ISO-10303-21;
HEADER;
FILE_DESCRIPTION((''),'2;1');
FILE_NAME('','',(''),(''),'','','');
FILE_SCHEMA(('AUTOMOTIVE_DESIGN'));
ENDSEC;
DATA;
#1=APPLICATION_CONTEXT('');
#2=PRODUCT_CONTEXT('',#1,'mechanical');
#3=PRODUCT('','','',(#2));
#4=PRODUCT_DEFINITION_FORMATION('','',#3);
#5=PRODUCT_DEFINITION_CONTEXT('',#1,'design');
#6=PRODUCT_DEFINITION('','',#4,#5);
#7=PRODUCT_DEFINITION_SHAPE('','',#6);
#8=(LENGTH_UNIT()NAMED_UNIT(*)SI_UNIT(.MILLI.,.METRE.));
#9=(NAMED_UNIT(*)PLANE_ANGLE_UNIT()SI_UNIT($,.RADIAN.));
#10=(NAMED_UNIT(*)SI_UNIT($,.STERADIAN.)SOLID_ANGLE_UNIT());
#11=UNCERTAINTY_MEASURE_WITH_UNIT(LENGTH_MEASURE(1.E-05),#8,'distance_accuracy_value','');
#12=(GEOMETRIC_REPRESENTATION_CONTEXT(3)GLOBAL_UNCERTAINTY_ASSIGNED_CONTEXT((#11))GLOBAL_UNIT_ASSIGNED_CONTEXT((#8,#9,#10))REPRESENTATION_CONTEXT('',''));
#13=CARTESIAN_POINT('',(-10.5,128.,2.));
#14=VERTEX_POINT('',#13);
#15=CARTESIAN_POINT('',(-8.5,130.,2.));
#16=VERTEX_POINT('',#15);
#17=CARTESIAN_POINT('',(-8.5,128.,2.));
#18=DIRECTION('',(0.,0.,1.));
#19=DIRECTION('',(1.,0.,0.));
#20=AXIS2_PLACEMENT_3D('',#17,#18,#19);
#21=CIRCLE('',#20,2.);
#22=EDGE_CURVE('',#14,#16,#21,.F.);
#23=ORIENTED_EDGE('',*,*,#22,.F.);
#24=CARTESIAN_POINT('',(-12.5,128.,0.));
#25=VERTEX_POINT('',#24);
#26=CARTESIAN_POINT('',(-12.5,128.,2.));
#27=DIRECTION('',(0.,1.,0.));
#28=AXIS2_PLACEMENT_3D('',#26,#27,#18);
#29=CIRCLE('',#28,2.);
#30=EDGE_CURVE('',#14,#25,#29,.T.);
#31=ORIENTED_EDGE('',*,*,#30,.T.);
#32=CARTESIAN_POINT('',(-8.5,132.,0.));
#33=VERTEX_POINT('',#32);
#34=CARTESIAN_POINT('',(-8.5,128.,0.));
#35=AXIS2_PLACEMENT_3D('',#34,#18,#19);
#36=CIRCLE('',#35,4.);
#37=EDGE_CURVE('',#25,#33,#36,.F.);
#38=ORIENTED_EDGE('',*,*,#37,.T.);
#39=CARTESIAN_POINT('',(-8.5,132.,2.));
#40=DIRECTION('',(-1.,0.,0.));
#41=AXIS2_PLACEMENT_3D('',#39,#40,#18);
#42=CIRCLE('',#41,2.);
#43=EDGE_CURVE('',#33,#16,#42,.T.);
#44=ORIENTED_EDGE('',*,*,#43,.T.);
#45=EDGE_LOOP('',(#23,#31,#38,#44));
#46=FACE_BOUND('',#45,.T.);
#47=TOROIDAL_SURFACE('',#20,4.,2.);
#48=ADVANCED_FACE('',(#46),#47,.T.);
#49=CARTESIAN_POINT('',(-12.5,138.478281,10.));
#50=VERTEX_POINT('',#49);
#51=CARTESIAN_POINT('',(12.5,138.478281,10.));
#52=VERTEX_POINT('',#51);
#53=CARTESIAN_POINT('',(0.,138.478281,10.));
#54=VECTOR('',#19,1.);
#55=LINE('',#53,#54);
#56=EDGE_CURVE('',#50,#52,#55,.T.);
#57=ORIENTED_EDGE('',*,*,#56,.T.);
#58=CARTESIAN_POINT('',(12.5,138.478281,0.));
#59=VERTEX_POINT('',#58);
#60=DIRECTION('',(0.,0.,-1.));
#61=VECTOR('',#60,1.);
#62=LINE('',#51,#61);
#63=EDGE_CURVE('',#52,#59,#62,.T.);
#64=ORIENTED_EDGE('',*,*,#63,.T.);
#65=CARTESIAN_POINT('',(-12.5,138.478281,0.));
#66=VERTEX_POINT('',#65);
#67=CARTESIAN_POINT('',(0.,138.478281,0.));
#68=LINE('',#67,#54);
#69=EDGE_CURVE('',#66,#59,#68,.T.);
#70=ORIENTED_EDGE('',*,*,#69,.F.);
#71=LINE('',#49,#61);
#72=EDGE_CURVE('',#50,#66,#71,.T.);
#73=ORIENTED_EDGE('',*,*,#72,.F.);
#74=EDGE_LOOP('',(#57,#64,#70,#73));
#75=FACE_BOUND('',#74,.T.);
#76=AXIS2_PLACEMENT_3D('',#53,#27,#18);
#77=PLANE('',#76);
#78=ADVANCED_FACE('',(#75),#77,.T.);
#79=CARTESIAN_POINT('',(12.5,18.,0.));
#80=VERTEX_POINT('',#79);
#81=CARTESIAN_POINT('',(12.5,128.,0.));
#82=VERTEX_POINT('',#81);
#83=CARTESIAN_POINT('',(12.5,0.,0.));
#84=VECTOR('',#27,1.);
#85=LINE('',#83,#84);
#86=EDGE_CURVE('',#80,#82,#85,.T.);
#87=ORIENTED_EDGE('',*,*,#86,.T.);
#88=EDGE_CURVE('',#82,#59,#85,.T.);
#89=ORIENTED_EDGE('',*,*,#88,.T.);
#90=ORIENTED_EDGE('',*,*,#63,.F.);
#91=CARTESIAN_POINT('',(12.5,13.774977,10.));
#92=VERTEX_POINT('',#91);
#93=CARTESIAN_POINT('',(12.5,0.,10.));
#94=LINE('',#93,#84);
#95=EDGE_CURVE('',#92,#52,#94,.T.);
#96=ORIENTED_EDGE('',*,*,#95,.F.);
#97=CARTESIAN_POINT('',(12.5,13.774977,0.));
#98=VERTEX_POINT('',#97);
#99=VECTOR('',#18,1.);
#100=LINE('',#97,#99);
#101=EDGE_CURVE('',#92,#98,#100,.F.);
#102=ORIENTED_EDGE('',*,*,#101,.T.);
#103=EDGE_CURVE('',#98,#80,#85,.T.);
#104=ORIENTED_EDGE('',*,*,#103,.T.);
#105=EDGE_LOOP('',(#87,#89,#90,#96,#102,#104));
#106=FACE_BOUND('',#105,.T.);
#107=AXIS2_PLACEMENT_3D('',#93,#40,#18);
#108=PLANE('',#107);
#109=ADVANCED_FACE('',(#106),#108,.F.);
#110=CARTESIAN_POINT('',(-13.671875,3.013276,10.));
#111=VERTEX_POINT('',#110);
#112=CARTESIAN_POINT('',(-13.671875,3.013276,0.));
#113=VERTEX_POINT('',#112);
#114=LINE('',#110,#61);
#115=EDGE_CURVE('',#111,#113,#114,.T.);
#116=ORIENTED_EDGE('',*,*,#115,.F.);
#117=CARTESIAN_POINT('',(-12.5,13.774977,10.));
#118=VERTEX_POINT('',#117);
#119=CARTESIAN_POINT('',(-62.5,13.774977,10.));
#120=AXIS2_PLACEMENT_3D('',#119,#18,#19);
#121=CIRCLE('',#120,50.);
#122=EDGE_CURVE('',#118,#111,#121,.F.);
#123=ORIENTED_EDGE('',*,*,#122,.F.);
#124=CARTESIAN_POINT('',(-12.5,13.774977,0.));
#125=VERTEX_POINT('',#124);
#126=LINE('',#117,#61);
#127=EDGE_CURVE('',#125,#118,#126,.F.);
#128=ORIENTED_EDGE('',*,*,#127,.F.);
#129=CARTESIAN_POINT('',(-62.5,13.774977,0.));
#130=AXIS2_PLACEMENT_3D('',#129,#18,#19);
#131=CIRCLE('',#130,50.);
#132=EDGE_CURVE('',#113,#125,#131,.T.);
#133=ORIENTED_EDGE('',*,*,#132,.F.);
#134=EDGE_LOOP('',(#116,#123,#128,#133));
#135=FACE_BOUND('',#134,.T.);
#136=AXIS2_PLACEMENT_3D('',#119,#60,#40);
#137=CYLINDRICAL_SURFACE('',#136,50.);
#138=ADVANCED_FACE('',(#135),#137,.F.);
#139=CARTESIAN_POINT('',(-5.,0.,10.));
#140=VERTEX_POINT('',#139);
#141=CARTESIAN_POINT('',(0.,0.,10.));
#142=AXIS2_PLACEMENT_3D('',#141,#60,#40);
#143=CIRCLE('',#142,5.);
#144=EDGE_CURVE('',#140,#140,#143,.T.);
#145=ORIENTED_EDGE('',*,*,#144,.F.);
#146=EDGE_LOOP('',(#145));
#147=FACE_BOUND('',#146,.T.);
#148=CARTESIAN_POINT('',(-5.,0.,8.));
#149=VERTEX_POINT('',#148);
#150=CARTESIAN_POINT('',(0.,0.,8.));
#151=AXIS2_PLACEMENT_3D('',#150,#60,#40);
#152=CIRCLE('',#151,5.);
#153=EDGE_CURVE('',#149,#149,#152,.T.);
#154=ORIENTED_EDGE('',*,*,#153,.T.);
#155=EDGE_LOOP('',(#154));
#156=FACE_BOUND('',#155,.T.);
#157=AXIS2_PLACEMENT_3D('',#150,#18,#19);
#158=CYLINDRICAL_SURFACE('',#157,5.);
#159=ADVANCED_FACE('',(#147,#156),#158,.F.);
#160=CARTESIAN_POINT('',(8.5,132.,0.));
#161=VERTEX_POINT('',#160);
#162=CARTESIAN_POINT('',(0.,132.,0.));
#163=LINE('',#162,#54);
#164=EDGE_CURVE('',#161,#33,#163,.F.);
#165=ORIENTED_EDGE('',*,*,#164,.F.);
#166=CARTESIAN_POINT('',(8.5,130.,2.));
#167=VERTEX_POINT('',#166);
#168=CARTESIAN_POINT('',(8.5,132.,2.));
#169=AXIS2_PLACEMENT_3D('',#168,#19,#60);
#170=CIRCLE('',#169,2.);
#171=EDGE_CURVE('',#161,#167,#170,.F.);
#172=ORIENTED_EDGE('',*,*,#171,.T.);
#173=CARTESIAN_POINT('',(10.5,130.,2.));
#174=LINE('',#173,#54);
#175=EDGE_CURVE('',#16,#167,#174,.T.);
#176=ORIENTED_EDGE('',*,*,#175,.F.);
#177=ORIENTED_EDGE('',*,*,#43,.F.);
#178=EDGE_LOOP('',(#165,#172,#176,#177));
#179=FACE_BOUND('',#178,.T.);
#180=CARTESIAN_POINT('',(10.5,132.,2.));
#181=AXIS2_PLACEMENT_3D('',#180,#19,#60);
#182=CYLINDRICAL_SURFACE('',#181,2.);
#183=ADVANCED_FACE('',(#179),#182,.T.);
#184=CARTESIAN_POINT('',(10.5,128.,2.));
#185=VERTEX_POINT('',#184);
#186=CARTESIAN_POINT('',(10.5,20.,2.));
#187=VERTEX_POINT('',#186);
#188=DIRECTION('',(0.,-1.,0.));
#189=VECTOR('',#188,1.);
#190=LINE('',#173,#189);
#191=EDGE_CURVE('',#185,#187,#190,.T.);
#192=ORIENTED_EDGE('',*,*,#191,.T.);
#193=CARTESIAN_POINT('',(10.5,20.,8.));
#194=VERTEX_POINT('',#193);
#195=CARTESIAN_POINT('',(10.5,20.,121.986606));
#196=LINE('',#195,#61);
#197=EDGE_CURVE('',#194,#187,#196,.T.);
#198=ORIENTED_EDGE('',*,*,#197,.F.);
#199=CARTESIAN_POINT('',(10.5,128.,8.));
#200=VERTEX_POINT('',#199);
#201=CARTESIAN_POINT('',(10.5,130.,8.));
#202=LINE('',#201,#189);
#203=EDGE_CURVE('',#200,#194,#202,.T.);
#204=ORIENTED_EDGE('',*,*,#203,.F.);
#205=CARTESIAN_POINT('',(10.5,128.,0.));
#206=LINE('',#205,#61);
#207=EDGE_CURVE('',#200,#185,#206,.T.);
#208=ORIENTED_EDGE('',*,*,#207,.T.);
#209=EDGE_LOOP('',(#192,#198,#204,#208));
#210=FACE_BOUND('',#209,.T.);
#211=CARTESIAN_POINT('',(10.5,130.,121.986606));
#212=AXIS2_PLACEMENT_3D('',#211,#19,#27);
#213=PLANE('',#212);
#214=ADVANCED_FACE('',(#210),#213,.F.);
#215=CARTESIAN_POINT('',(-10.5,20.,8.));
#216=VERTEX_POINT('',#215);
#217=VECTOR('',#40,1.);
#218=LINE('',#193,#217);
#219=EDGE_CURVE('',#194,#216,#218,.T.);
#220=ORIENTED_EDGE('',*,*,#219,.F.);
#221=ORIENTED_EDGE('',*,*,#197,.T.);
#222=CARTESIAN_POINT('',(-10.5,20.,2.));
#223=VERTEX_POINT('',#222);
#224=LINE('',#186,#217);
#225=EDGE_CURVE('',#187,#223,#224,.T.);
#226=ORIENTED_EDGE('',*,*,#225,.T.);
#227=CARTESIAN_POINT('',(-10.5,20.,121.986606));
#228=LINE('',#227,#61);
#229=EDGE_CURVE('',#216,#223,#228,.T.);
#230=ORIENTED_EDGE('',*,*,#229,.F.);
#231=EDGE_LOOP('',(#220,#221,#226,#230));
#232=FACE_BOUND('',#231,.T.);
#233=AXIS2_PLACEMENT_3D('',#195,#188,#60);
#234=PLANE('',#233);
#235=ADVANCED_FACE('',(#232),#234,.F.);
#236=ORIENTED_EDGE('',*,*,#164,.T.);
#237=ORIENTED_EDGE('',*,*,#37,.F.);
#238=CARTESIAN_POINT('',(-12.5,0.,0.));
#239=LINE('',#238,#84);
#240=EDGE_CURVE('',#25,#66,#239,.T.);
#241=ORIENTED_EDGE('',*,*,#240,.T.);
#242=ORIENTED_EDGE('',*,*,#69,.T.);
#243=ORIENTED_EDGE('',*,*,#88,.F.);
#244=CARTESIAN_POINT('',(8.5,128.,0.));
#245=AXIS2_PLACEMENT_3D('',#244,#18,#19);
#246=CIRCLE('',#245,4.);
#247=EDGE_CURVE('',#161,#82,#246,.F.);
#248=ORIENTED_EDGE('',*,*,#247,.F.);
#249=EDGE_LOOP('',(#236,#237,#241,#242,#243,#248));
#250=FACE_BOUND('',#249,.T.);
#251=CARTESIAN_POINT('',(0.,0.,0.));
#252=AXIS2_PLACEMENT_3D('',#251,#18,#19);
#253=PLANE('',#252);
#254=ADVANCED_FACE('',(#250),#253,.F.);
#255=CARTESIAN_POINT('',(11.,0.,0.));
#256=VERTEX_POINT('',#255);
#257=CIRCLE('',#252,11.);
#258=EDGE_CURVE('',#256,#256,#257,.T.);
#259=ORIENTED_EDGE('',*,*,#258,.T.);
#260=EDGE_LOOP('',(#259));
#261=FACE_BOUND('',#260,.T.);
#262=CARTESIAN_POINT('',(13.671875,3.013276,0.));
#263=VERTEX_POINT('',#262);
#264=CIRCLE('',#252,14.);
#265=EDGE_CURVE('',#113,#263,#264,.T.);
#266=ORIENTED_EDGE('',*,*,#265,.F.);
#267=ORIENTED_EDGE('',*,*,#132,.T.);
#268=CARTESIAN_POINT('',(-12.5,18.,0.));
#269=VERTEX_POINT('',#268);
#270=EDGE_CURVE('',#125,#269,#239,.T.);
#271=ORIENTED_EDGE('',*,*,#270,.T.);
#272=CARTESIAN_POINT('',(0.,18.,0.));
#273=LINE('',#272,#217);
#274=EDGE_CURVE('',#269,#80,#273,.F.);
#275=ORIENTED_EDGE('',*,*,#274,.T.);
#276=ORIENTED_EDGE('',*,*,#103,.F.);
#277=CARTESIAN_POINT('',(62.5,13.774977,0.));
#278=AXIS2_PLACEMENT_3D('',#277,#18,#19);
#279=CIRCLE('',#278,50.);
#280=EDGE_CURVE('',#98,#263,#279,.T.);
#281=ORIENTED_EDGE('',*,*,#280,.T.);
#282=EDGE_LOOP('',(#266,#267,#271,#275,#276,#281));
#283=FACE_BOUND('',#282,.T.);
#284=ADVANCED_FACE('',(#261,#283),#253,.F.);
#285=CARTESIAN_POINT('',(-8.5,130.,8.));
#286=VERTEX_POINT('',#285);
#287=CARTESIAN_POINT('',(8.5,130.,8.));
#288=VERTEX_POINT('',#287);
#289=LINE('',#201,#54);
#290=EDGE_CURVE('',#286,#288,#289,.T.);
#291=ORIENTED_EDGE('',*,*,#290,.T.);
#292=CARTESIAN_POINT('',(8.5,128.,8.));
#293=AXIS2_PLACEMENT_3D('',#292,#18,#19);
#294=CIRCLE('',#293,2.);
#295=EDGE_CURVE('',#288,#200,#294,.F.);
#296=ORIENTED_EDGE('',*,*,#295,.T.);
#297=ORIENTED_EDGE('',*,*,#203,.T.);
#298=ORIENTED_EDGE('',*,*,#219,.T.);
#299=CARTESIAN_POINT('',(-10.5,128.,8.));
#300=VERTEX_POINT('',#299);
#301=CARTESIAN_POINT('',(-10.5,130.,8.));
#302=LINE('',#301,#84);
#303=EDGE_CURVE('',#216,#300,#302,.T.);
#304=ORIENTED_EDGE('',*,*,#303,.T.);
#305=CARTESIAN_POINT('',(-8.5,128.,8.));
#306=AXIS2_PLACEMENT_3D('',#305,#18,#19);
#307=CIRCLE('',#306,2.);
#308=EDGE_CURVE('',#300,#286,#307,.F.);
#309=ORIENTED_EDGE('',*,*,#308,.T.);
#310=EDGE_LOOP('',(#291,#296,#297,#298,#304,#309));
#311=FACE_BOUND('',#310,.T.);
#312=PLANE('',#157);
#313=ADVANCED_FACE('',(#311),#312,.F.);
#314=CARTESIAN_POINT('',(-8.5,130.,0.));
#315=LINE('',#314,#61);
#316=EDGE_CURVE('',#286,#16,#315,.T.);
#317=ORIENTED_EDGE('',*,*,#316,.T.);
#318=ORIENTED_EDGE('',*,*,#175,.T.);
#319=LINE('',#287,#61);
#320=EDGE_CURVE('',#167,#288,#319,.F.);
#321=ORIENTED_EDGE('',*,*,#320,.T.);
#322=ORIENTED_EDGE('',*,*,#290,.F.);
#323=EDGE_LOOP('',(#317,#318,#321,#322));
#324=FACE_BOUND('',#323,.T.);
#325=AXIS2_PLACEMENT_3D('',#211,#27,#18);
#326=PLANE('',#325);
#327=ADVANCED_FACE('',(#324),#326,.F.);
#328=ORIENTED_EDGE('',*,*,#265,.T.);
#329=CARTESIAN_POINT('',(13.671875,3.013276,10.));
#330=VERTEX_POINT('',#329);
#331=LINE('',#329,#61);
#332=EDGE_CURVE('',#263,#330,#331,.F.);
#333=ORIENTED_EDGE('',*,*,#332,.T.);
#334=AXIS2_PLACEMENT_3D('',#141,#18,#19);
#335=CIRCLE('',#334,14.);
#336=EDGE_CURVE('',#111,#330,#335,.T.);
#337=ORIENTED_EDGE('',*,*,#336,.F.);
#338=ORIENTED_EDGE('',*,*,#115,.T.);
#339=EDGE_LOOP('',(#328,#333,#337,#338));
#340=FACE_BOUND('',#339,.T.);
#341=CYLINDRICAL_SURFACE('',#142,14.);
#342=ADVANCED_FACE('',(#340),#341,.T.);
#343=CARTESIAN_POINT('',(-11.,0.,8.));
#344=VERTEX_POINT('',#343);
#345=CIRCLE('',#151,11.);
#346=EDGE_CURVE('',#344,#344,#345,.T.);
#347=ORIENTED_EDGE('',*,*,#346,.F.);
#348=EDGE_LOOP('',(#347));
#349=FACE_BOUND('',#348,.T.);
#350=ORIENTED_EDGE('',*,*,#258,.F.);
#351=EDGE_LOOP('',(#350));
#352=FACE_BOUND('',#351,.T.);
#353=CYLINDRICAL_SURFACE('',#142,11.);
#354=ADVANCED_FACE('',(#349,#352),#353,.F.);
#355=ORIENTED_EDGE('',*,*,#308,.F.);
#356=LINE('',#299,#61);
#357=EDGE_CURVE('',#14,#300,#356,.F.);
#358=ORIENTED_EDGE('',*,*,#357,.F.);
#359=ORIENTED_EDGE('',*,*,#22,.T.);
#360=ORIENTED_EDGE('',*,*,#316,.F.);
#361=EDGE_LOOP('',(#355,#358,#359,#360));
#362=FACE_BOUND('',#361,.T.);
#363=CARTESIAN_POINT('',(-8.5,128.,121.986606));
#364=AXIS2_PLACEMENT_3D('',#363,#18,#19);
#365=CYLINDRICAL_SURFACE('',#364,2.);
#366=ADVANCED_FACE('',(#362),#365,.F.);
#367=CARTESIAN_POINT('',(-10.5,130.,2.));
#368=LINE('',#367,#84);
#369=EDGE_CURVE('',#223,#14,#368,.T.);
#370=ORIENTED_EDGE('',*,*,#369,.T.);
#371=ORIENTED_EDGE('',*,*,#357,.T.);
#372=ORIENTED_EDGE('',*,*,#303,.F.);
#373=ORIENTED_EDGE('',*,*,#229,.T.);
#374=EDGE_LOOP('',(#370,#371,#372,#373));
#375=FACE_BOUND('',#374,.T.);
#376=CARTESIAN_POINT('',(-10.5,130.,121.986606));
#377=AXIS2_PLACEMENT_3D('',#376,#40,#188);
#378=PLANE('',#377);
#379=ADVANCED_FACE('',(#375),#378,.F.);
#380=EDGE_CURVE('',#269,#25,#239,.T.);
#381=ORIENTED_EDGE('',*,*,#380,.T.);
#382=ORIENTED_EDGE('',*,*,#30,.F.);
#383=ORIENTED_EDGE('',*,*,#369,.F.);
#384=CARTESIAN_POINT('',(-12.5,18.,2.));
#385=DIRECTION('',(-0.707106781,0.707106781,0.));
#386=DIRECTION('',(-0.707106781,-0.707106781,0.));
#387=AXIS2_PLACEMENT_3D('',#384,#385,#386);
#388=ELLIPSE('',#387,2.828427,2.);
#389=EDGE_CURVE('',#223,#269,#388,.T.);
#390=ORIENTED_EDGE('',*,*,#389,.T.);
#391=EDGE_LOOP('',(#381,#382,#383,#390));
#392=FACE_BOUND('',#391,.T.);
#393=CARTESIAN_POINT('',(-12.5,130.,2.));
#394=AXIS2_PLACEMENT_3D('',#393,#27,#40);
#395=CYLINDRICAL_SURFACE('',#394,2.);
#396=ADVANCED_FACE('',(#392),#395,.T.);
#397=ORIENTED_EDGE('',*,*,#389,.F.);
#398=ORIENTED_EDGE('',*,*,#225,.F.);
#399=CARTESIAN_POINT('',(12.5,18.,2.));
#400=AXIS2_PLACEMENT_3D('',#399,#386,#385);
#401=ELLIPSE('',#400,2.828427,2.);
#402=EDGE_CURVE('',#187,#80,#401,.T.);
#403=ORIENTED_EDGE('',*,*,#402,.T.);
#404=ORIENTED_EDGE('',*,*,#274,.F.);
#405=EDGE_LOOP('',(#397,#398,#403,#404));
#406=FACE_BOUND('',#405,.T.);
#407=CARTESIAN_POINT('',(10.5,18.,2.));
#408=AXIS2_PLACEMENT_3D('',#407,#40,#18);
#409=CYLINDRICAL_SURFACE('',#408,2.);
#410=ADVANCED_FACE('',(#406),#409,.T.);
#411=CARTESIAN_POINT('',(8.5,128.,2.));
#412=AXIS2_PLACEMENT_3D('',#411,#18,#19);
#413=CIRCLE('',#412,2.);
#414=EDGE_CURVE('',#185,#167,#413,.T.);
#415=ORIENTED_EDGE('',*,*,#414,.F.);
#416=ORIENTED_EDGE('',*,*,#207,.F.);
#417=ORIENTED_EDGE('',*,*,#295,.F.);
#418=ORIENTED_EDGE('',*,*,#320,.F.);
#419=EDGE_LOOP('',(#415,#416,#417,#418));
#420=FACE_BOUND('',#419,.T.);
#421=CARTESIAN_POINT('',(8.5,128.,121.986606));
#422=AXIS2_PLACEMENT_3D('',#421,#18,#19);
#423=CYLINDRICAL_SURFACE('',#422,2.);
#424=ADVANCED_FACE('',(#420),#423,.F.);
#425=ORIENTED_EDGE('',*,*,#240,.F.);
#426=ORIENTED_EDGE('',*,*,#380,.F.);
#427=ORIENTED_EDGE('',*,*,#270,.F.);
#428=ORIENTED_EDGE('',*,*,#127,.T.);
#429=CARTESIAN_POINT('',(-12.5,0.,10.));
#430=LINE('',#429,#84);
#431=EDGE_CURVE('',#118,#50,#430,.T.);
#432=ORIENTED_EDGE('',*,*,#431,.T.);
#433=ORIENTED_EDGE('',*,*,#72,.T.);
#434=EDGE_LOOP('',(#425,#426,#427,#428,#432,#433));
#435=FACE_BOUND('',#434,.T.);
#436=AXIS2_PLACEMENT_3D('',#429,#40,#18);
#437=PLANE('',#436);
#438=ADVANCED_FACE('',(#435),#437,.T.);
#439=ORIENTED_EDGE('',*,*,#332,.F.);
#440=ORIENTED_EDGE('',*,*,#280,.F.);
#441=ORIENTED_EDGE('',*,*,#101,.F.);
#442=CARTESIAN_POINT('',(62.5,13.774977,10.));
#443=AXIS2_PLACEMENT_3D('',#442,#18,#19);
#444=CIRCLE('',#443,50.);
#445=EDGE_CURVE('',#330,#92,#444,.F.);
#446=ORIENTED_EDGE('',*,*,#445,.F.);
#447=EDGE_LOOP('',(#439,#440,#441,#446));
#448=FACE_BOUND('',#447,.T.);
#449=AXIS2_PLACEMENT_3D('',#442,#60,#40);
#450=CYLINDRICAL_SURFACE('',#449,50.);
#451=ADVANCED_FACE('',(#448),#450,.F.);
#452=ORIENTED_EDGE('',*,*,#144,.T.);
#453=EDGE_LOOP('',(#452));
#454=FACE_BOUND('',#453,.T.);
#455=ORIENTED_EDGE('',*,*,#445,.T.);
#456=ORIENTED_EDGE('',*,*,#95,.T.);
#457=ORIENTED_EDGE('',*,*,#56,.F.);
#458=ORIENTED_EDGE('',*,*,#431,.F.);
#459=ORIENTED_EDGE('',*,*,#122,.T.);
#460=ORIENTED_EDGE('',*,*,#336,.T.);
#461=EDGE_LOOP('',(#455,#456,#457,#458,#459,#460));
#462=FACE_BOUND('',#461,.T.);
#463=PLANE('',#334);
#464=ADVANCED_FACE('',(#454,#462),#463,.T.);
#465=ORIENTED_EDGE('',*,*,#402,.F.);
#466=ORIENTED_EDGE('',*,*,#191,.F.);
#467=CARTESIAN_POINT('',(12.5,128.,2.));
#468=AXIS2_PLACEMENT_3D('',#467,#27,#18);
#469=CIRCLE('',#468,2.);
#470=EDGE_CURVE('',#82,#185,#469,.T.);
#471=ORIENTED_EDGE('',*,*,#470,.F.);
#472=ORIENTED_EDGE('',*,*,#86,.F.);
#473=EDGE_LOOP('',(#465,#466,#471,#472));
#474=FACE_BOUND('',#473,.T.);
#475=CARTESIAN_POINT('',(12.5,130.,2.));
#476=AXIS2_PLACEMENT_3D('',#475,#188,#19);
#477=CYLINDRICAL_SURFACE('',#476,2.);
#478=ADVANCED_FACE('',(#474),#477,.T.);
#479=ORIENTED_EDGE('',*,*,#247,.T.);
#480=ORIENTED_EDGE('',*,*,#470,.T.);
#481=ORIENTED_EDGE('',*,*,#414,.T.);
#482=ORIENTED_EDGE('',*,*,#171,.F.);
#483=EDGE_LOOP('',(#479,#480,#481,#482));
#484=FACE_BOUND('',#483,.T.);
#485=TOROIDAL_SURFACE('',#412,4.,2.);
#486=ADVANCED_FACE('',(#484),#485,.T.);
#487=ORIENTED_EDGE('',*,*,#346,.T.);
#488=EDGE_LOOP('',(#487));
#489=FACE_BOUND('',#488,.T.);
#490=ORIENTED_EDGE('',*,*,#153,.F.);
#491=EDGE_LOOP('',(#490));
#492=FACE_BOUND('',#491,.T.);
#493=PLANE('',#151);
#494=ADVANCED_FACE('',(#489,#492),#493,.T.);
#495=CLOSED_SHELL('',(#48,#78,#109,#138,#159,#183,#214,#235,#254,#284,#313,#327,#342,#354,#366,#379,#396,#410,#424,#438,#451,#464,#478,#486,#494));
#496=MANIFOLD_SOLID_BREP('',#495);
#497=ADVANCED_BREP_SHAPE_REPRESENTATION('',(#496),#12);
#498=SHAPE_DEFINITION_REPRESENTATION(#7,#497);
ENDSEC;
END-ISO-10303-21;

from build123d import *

# Parameters (mm, degrees)
SKETCH2_R           = 11
BOSS_EXTRUDE1_DEPTH = 10
BOSS_EXTRUDE3_START = 2
SKETCH6_R           = 11
SKETCH6_R_2         = 5
BOSS_EXTRUDE3_DEPTH = 2
SKETCH11_W          = 21
SKETCH11_H          = 110
CUT_EXTRUDE1_DEPTH  = 8
FILLET2_R           = 50
FILLET3_R           = 2


with BuildPart() as part:
    # Sketch2 → Boss-Extrude1 (new body)
    with BuildSketch(Plane.XY):
        with BuildLine():
            Line((12.5, 138.478281378), (-12.5, 138.478281378))
            Line((-12.5, 138.478281378), (-12.5, 6.304760106))
            ThreePointArc((-12.5, 6.304760106), (0, -14), (12.5, 6.304760106))
            Line((12.5, 6.304760106), (12.5, 138.478281378))
        make_face()
        Circle(SKETCH2_R, mode=Mode.SUBTRACT)
    extrude(amount=BOSS_EXTRUDE1_DEPTH)

    # Sketch6 → Boss-Extrude3 (add)
    with BuildSketch(Plane(origin=(0, 0, 10), x_dir=(-1, 0, 0), z_dir=(0, 0, -1)).offset(BOSS_EXTRUDE3_START)):
        Circle(SKETCH6_R)
        Circle(SKETCH6_R_2, mode=Mode.SUBTRACT)
    extrude(amount=-BOSS_EXTRUDE3_DEPTH)

    # Sketch11 → Cut-Extrude1 (cut)
    with BuildSketch(Plane(origin=(0, 0, 0), x_dir=(-1, 0, 0), z_dir=(0, 0, -1))):
        with Locations((0, 75)):
            Rectangle(SKETCH11_W, SKETCH11_H)
    extrude(amount=-CUT_EXTRUDE1_DEPTH, mode=Mode.SUBTRACT)

    # Fillet2
    fillet2_edges = [part.edges().sort_by_distance(p)[0] for p in [
        (12.5, 6.304760106, 5),
        (-12.5, 6.304760106, 5),
    ]]
    fillet(fillet2_edges, radius=FILLET2_R)

    # Fillet3
    fillet3_edges = [part.edges().sort_by_distance(p)[0] for p in [
        (10.5, 75, 0),
        (0, 20, 0),
        (-10.5, 75, 0),
        (0, 130, 0),
        (-10.5, 130, 4),
        (10.5, 130, 4),
    ]]
    fillet(fillet3_edges, radius=FILLET3_R - 0.0001)  # a hair under: the kernel refuses the full size


solid = part.part
